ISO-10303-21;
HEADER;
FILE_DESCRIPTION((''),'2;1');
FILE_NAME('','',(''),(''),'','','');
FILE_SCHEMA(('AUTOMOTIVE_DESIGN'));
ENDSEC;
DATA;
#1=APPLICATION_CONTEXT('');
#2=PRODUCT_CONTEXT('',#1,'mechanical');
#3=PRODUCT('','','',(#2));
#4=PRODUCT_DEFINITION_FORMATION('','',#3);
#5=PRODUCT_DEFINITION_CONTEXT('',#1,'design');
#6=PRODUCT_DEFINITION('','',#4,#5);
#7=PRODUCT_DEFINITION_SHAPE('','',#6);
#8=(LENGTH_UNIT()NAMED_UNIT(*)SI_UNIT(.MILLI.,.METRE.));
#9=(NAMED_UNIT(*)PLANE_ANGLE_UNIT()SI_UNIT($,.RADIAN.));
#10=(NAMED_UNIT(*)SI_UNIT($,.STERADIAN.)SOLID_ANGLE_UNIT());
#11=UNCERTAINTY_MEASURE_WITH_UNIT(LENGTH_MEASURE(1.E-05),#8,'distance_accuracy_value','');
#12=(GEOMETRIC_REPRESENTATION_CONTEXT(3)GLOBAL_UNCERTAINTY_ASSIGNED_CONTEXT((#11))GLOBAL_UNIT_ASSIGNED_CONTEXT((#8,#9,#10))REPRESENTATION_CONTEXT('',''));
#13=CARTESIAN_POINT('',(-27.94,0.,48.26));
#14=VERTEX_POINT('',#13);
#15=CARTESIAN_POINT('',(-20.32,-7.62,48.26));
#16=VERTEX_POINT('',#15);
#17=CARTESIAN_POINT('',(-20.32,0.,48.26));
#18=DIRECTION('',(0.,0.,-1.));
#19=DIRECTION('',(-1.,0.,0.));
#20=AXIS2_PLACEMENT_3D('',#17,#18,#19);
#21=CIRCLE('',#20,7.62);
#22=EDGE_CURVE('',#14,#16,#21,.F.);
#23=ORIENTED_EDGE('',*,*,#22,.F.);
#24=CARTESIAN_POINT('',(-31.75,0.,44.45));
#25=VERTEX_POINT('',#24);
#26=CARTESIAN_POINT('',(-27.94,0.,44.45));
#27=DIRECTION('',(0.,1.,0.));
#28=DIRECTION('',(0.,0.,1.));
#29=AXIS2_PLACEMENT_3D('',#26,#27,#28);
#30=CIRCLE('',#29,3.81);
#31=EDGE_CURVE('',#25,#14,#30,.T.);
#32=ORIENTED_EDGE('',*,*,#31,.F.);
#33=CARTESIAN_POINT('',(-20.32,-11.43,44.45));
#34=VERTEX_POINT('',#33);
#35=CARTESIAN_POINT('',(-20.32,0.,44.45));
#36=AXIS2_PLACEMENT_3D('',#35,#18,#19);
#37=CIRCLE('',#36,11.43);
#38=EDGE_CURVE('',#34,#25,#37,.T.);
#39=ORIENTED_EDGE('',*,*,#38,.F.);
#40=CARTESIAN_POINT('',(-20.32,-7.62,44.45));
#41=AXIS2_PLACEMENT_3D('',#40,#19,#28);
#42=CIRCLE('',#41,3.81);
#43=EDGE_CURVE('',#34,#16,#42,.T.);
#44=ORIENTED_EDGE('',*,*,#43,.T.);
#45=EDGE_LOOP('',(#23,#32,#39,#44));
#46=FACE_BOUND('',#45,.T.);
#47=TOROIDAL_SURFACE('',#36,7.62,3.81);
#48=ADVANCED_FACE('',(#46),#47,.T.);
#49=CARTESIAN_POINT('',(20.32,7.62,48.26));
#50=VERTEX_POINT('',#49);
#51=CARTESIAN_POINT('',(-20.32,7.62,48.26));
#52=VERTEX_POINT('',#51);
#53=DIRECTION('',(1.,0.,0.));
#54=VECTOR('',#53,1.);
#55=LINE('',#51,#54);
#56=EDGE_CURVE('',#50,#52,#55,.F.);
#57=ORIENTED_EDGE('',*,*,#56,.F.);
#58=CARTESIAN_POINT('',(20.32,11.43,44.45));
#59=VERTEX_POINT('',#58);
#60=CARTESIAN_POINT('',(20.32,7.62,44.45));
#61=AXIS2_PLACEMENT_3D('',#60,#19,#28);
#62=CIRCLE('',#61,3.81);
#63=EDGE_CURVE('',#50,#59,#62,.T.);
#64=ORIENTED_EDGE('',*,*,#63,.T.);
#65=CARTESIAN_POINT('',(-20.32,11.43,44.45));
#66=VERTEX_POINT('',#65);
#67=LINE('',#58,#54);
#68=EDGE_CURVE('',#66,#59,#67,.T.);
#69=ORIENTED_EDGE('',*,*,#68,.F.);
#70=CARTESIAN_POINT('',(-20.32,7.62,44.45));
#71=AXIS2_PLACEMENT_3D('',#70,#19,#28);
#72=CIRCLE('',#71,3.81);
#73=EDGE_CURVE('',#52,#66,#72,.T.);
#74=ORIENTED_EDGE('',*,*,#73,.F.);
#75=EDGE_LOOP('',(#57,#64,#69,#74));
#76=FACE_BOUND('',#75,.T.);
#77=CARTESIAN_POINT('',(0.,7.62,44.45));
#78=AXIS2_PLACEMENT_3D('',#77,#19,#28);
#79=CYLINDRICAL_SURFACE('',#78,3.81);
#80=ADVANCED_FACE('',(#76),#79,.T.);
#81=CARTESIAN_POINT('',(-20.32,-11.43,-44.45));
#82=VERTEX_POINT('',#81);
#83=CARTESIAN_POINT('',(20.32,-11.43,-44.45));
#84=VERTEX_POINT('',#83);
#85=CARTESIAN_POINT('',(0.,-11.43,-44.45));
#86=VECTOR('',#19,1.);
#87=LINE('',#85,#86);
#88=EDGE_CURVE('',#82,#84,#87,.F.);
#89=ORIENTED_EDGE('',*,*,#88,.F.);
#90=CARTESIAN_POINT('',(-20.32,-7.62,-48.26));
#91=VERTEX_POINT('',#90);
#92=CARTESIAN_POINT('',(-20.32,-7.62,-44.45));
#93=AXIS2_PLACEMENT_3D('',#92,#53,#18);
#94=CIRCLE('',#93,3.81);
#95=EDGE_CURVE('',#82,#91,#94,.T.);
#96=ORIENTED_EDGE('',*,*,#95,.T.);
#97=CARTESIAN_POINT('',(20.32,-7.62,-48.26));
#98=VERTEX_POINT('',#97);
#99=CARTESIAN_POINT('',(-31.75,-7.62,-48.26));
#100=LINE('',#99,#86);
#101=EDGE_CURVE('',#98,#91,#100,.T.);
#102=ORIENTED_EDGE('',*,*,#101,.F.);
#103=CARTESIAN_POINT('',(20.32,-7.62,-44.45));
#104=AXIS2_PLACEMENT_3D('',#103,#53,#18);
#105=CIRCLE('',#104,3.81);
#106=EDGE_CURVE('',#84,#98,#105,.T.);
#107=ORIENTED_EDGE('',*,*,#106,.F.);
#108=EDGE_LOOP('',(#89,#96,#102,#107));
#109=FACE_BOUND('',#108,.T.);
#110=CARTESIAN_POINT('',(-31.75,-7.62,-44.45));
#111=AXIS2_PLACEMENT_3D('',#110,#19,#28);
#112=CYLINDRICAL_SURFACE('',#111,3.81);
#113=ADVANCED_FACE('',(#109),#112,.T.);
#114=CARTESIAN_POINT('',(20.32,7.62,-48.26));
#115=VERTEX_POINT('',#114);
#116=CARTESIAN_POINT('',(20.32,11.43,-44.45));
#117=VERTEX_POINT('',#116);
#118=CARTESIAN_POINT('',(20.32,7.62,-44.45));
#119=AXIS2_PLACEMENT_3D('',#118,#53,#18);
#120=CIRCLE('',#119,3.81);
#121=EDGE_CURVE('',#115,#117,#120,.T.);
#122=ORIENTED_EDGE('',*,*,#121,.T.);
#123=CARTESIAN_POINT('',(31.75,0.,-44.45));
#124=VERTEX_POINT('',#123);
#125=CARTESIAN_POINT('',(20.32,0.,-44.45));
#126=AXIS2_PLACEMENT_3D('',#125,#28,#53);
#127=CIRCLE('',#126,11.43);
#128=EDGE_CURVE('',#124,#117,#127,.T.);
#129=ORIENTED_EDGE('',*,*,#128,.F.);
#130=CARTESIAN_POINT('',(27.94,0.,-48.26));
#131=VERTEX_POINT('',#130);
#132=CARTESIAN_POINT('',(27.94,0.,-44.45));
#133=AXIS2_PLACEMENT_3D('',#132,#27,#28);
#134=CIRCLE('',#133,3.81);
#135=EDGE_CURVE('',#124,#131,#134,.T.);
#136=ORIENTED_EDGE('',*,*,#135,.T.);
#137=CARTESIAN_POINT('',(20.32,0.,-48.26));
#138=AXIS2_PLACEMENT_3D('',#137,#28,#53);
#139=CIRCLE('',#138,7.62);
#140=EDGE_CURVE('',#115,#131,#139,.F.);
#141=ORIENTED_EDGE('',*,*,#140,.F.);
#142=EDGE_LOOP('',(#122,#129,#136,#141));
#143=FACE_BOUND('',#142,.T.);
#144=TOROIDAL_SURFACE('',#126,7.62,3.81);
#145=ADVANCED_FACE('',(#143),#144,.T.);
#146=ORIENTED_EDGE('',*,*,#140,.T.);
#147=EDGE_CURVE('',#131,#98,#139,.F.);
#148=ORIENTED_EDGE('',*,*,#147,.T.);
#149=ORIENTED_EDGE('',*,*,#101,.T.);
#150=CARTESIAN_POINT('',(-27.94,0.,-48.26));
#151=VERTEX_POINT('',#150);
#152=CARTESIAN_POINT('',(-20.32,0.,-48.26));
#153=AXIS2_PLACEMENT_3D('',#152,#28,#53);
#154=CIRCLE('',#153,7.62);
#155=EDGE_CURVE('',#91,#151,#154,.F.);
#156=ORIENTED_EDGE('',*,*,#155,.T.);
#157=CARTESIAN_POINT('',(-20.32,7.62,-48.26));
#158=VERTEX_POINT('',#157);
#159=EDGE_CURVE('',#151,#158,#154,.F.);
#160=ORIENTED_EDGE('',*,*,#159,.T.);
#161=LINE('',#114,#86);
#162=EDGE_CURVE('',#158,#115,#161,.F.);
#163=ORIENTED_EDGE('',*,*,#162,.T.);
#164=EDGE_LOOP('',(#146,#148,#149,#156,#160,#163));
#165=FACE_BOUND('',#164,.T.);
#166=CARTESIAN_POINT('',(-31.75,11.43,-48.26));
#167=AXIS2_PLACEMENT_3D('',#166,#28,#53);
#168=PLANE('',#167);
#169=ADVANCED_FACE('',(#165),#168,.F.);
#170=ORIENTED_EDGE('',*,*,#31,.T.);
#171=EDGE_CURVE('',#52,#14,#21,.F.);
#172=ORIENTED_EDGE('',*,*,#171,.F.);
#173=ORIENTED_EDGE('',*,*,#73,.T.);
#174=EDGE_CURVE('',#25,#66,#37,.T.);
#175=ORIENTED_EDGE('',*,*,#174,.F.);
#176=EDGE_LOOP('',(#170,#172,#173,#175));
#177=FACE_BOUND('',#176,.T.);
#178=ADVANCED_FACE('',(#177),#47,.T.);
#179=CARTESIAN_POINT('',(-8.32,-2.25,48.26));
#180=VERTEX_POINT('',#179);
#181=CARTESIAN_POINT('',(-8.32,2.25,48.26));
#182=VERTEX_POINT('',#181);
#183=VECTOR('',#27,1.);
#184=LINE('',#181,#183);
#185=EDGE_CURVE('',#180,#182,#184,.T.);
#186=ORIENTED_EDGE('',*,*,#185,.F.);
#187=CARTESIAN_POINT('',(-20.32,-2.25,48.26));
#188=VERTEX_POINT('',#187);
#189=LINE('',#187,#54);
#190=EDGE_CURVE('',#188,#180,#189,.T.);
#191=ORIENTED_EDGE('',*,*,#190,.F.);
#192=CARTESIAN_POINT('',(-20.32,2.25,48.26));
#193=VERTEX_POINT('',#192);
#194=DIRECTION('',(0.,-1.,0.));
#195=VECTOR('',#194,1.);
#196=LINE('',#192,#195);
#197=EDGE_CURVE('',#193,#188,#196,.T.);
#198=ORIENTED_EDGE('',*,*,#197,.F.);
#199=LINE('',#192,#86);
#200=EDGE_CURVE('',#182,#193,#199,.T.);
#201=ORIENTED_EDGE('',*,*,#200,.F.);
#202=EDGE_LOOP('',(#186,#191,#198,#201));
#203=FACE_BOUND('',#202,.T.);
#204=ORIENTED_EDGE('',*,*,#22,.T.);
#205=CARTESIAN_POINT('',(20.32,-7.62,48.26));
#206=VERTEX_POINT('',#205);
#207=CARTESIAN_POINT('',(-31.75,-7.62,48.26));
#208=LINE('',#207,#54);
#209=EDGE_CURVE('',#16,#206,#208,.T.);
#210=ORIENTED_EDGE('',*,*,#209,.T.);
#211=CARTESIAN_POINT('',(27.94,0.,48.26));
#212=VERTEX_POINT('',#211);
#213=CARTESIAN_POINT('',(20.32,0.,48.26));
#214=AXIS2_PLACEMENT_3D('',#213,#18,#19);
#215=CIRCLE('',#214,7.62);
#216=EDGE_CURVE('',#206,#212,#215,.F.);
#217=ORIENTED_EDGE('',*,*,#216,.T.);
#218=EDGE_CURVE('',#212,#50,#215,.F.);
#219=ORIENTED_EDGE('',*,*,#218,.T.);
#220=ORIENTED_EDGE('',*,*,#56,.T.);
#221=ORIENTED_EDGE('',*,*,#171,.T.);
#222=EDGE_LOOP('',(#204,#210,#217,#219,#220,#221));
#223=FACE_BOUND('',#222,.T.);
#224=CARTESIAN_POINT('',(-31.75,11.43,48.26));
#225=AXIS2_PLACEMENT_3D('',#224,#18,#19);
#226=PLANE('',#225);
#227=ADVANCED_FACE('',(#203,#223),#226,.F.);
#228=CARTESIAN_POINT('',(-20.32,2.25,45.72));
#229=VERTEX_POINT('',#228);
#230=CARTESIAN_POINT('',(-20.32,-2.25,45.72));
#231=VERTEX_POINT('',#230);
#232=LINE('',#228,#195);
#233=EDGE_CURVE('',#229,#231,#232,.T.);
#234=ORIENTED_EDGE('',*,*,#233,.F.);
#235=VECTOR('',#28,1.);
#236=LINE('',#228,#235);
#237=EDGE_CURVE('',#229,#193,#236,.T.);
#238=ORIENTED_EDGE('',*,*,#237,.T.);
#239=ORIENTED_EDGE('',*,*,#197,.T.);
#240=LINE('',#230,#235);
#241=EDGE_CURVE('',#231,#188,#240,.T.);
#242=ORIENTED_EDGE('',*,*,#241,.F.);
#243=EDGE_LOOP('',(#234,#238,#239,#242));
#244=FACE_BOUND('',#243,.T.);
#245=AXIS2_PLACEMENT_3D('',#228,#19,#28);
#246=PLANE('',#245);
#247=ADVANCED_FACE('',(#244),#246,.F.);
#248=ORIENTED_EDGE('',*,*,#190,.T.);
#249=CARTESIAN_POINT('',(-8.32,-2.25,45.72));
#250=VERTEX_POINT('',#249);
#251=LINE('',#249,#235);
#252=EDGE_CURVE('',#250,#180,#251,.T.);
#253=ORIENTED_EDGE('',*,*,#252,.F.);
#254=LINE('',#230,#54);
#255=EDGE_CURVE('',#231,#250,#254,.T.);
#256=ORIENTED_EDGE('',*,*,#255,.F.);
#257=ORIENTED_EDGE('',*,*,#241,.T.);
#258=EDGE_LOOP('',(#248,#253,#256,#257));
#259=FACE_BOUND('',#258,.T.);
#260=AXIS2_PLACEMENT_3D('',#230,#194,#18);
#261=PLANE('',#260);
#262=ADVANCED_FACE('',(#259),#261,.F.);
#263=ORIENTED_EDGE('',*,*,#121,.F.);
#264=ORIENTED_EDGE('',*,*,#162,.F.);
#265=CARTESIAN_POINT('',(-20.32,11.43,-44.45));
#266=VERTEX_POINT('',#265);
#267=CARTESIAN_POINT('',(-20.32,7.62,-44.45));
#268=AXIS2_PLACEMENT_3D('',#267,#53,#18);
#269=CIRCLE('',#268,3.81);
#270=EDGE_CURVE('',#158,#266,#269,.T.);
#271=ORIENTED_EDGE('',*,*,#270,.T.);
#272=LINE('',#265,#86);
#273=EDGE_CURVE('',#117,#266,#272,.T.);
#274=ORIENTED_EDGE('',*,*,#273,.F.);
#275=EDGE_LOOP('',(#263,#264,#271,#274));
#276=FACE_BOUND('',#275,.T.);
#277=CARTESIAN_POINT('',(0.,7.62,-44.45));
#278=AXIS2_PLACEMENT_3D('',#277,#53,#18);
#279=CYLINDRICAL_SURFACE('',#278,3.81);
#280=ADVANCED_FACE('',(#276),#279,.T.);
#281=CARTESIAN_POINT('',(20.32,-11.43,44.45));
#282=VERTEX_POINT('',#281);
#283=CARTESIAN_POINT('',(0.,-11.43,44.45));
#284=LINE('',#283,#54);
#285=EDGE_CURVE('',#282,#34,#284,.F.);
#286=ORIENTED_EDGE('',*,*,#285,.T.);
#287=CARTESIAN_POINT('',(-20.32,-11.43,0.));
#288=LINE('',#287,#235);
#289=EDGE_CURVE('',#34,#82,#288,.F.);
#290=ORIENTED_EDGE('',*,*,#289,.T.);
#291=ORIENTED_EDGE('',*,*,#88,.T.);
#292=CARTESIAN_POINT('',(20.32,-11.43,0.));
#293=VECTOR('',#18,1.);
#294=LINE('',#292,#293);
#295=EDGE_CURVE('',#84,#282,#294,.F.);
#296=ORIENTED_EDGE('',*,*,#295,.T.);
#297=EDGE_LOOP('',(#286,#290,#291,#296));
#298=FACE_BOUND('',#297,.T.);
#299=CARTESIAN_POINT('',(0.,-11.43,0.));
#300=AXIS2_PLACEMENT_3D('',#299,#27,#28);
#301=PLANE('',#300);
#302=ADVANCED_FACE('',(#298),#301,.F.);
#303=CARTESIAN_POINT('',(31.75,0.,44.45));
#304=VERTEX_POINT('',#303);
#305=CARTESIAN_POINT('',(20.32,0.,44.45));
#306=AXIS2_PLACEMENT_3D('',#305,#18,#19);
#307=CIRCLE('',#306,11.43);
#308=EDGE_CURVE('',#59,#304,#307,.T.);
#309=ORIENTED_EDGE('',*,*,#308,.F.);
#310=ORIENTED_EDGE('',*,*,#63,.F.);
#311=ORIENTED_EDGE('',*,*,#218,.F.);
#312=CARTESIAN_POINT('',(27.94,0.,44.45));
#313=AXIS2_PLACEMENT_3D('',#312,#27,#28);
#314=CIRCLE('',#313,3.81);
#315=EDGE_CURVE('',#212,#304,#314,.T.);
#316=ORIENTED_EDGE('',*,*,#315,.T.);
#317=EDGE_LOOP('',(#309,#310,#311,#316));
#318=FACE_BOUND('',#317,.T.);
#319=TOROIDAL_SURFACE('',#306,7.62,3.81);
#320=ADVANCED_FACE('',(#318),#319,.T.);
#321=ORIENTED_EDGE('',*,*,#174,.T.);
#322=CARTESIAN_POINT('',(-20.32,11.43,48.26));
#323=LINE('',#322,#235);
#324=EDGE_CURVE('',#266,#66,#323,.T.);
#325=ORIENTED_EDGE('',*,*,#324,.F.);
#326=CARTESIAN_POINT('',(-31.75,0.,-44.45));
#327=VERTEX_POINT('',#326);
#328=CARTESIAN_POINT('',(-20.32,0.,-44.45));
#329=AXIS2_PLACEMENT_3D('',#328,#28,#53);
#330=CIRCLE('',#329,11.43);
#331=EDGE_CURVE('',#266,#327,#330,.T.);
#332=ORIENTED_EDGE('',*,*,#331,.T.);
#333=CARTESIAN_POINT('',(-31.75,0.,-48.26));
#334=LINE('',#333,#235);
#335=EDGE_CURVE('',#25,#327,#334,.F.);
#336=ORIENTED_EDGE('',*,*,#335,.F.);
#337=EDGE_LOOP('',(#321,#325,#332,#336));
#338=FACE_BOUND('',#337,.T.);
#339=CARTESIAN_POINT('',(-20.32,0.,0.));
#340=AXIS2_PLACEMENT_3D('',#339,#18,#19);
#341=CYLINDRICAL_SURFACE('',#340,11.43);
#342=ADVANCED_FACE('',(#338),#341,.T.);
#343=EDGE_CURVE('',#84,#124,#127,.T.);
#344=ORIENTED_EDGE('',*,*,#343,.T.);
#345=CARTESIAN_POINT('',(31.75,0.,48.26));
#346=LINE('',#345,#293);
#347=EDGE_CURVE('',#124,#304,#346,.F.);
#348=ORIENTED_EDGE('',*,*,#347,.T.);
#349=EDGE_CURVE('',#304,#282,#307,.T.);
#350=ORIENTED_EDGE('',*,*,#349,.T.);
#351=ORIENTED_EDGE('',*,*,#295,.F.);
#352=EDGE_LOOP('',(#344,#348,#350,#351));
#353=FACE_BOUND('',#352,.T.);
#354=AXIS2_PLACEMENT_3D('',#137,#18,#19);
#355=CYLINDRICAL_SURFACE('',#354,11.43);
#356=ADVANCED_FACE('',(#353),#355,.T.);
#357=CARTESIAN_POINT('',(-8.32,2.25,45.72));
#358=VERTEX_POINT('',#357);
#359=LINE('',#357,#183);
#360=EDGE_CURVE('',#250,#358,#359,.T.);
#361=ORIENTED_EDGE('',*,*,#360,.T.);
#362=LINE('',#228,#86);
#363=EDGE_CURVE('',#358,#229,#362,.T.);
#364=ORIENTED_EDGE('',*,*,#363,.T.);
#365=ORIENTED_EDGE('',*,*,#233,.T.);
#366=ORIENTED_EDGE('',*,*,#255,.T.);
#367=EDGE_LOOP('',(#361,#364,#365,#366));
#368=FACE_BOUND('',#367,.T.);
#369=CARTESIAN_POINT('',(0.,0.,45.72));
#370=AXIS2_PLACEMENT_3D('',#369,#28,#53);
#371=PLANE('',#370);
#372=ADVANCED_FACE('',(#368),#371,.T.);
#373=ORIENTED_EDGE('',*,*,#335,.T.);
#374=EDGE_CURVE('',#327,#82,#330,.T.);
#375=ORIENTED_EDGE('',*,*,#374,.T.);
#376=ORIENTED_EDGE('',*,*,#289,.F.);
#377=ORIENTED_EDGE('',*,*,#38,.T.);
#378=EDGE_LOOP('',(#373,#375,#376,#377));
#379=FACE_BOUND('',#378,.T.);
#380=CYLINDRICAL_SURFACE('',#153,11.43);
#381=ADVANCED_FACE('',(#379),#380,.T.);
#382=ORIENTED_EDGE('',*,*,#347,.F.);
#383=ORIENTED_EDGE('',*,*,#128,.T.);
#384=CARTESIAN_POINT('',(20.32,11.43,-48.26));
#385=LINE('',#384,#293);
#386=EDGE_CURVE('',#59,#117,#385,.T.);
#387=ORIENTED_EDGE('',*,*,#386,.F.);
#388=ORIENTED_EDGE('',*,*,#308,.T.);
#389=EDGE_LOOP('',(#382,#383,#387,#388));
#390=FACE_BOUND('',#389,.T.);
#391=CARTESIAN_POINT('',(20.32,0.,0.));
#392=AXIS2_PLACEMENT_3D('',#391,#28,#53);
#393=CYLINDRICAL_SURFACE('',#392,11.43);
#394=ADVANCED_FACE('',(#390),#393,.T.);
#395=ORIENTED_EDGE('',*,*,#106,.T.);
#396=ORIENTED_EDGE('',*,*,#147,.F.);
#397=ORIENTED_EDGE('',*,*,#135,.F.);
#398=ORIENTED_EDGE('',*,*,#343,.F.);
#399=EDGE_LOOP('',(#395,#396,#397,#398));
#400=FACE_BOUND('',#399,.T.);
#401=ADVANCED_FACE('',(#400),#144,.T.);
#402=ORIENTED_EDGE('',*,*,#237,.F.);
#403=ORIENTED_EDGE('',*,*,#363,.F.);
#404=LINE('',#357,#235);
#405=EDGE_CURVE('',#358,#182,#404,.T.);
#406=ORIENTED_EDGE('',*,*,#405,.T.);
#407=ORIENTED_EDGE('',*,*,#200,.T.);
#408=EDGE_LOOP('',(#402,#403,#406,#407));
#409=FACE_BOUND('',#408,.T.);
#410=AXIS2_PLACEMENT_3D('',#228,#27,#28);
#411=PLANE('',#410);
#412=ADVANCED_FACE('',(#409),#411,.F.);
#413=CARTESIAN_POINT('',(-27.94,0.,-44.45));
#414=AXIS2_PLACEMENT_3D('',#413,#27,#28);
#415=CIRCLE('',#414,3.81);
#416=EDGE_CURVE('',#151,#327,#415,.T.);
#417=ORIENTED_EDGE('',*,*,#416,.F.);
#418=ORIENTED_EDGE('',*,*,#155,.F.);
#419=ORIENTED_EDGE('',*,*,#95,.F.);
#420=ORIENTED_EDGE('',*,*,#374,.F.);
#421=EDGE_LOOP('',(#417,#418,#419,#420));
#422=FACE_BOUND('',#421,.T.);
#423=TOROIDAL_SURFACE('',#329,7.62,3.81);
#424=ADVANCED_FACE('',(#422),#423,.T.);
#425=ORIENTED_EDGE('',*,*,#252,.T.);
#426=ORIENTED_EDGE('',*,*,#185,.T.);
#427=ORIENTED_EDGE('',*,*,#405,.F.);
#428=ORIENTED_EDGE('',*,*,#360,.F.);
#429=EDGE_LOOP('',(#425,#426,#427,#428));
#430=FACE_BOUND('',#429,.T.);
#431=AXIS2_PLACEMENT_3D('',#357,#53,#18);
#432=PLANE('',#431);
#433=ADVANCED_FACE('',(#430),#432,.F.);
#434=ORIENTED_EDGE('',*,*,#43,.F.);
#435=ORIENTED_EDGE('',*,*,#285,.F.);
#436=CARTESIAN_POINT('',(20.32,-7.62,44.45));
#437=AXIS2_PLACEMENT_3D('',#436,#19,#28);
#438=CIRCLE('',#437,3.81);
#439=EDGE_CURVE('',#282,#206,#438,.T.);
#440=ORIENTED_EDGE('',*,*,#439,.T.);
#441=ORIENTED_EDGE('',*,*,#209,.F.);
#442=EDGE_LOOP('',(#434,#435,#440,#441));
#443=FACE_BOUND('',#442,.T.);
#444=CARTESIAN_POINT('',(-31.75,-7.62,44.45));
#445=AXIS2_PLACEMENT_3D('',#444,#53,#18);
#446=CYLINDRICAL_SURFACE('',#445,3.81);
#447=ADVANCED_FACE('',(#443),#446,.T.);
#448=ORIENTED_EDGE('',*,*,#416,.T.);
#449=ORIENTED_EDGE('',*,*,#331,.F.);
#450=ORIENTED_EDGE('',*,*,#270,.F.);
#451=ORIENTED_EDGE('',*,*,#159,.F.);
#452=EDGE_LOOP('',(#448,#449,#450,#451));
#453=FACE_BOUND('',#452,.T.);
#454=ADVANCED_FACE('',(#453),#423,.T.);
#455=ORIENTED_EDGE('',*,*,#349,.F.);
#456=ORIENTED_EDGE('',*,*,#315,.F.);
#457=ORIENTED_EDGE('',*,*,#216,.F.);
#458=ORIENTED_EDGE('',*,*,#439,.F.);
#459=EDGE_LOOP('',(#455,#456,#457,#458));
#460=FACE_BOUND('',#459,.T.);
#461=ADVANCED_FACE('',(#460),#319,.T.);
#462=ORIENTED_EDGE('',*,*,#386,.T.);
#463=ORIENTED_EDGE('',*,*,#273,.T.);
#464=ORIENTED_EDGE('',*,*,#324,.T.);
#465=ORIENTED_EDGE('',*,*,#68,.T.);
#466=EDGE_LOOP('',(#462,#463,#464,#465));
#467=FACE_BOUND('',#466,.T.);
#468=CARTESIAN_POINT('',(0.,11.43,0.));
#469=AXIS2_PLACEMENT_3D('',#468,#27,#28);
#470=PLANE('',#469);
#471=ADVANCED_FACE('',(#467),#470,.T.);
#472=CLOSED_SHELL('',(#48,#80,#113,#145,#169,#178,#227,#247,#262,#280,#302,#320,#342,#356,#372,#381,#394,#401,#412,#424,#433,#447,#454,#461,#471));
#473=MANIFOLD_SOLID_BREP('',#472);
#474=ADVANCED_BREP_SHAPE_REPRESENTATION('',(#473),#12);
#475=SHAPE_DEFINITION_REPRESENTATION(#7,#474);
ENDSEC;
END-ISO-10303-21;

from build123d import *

# Parameters (mm, degrees)
SKETCH1_W           = 63.5
SKETCH1_H           = 96.52
BOSS_EXTRUDE1_DEPTH = 11.43
FILLET1_R           = 11.43
FILLET2_R           = 3.81
SKETCH2_W           = 12
SKETCH2_H           = 4.49999989
CUT_EXTRUDE1_DEPTH  = 2.54


with BuildPart() as part:
    # Sketch1 → Boss-Extrude1 (new, symmetric)
    with BuildSketch(Plane(origin=(0, 0, 0), x_dir=(1, 0, 0), z_dir=(0, 1, 0))):
        Rectangle(SKETCH1_W, SKETCH1_H)
    extrude(amount=BOSS_EXTRUDE1_DEPTH, both=True)

    # Fillet1
    fillet1_edges = [part.edges().sort_by_distance(p)[0] for p in [
        (-31.75, -11.43, 0),
        (-31.75, 11.43, 0),
        (31.75, -11.43, 0),
        (31.75, 11.43, 0),
    ]]
    fillet(fillet1_edges, radius=FILLET1_R - 0.0001)  # a hair under: the kernel refuses the full size

    # Fillet2
    fillet2_edges = [part.edges().sort_by_distance(p)[0] for p in [
        (0, -11.43, 48.26),
        (0, 11.43, 48.26),
        (28.402259798, 8.082259798, 48.26),
        (28.402259798, -8.082259798, 48.26),
        (-28.402259798, 8.082259798, 48.26),
        (-28.402259798, -8.082259798, 48.26),
        (0, -11.43, -48.26),
        (0, 11.43, -48.26),
        (28.402259798, 8.082259798, -48.26),
        (28.402259798, -8.082259798, -48.26),
        (-28.402259798, 8.082259798, -48.26),
        (-28.402259798, -8.082259798, -48.26),
    ]]
    fillet(fillet2_edges, radius=FILLET2_R)

    # Sketch2 → Cut-Extrude1 (cut)
    with BuildSketch(Plane.XY.offset(48.26)):
        with Locations((-14.32, 0)):
            Rectangle(SKETCH2_W, SKETCH2_H)
    extrude(amount=-CUT_EXTRUDE1_DEPTH, mode=Mode.SUBTRACT)


solid = part.part
